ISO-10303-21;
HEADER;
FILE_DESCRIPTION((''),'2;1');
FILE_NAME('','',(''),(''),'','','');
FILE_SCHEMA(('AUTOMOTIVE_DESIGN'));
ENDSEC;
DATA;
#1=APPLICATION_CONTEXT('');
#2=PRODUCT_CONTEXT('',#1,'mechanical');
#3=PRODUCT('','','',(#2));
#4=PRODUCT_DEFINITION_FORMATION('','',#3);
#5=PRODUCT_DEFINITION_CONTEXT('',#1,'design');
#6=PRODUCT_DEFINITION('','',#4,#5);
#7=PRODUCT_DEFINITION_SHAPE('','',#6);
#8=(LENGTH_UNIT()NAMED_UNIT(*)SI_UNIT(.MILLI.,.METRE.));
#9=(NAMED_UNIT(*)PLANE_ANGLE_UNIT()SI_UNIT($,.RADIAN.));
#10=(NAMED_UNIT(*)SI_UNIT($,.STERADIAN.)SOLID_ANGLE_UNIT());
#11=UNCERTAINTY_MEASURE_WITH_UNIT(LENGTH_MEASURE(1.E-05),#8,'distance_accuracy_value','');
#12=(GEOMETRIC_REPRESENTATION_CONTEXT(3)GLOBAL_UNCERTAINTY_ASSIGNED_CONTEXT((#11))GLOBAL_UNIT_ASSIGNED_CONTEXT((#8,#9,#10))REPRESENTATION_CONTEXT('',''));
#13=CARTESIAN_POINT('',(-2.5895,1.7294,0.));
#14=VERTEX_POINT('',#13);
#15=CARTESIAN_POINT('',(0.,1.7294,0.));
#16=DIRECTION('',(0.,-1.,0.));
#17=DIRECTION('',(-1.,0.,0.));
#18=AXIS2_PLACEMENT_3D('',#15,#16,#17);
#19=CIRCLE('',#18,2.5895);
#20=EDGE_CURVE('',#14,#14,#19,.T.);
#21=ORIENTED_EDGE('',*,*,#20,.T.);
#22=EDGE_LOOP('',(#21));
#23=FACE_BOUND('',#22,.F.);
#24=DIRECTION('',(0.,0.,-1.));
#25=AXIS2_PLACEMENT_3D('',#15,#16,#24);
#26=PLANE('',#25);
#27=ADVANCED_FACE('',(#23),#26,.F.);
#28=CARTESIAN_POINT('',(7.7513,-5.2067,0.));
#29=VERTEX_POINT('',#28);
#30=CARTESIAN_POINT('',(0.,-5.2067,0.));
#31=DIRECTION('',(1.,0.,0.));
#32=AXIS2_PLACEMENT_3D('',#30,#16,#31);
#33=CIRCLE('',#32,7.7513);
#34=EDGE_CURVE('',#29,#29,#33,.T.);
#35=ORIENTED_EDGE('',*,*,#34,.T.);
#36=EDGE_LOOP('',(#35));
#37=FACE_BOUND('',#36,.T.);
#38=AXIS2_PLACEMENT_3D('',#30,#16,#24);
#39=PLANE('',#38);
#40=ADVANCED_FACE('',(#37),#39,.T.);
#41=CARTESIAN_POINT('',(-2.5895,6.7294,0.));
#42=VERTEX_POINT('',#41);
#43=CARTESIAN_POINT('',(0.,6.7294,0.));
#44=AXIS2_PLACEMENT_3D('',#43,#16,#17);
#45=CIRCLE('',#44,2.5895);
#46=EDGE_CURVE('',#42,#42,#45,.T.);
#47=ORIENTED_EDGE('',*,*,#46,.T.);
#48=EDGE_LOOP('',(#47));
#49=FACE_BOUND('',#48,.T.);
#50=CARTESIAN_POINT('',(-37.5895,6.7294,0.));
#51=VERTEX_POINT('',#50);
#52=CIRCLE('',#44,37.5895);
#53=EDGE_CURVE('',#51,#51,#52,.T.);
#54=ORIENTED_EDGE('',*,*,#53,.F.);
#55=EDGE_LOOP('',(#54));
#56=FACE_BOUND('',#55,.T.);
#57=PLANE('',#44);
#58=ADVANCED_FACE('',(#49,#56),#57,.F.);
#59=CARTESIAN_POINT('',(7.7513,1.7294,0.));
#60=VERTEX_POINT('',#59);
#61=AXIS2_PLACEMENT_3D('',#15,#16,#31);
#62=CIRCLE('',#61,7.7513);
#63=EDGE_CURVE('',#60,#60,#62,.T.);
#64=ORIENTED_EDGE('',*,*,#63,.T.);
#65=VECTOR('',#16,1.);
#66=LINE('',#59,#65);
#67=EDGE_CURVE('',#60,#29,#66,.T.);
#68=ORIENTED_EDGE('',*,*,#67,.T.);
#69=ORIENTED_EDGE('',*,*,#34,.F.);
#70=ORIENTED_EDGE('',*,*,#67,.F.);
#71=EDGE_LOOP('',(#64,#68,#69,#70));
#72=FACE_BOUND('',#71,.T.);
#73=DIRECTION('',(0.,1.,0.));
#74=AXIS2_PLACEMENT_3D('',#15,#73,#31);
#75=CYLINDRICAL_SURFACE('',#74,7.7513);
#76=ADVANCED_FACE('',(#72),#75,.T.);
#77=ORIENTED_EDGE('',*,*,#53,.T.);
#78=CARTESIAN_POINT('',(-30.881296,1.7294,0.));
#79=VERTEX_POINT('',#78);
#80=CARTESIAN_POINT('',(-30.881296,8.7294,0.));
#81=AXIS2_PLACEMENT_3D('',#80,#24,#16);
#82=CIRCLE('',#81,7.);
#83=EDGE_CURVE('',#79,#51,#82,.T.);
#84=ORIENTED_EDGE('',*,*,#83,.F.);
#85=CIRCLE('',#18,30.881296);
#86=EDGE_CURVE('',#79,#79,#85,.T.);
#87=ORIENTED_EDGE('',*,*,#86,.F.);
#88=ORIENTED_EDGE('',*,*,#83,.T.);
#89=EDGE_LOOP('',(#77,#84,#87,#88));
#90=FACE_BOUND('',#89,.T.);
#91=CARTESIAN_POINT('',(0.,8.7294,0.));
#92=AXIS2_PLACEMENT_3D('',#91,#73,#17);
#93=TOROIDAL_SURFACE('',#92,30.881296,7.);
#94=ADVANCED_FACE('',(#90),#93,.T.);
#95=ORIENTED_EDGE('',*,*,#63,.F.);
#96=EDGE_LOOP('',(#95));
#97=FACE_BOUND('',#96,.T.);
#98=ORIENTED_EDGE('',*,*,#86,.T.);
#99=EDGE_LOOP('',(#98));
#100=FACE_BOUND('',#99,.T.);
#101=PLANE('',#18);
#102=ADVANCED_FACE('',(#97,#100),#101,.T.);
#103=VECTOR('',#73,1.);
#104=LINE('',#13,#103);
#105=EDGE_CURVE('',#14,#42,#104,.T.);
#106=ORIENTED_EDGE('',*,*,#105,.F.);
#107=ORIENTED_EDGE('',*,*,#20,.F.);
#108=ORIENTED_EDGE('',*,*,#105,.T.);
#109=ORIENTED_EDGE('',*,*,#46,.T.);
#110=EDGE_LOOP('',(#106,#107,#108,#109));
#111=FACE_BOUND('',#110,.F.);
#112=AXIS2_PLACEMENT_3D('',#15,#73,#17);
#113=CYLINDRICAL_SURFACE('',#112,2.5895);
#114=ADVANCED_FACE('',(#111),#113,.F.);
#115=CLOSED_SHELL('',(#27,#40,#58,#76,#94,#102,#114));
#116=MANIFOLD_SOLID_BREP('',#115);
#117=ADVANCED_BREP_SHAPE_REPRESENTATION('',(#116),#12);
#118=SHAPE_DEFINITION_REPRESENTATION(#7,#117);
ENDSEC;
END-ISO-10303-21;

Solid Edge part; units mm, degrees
sketch "Sketch1" plane through (0, 0, 0) normal (0, 0, 1) x (1, 0, 0)
  line L0 (-37.5895, 1.7294) -> (-2.5895, 1.7294)
  line L1 (-2.5895, 1.7294) -> (-2.5895, 6.7294)
  line L2 (-2.5895, 6.7294) -> (-37.5895, 6.7294)
  line L3 (-37.5895, 6.7294) -> (-37.5895, 1.7294)
  dimension "D1" = 35
  dimension "D2" = 5
revolve "RevolvedProtrusion1" add sketch "Sketch1" angle 360 about axis through (0, 54, 0) along (0, -1, 0)
fillet "Round1" radius 7 1 edges at (-37.5895, 1.7294, 0)
sketch "Sketch2" plane through (0, 1.7294, 0) normal (0, -1, 0) x (1, 0, 0)
  circle A0 centre (0, 0) radius 7.7513
  dimension "D1" = 15.5027
extrude "ExtrudedProtrusion_1" add sketch "Sketch2" along normal blind 6.9361
properties material "Aluminum Alloy:3.1255, AlCu4SiMg, EN-AW 2014"
